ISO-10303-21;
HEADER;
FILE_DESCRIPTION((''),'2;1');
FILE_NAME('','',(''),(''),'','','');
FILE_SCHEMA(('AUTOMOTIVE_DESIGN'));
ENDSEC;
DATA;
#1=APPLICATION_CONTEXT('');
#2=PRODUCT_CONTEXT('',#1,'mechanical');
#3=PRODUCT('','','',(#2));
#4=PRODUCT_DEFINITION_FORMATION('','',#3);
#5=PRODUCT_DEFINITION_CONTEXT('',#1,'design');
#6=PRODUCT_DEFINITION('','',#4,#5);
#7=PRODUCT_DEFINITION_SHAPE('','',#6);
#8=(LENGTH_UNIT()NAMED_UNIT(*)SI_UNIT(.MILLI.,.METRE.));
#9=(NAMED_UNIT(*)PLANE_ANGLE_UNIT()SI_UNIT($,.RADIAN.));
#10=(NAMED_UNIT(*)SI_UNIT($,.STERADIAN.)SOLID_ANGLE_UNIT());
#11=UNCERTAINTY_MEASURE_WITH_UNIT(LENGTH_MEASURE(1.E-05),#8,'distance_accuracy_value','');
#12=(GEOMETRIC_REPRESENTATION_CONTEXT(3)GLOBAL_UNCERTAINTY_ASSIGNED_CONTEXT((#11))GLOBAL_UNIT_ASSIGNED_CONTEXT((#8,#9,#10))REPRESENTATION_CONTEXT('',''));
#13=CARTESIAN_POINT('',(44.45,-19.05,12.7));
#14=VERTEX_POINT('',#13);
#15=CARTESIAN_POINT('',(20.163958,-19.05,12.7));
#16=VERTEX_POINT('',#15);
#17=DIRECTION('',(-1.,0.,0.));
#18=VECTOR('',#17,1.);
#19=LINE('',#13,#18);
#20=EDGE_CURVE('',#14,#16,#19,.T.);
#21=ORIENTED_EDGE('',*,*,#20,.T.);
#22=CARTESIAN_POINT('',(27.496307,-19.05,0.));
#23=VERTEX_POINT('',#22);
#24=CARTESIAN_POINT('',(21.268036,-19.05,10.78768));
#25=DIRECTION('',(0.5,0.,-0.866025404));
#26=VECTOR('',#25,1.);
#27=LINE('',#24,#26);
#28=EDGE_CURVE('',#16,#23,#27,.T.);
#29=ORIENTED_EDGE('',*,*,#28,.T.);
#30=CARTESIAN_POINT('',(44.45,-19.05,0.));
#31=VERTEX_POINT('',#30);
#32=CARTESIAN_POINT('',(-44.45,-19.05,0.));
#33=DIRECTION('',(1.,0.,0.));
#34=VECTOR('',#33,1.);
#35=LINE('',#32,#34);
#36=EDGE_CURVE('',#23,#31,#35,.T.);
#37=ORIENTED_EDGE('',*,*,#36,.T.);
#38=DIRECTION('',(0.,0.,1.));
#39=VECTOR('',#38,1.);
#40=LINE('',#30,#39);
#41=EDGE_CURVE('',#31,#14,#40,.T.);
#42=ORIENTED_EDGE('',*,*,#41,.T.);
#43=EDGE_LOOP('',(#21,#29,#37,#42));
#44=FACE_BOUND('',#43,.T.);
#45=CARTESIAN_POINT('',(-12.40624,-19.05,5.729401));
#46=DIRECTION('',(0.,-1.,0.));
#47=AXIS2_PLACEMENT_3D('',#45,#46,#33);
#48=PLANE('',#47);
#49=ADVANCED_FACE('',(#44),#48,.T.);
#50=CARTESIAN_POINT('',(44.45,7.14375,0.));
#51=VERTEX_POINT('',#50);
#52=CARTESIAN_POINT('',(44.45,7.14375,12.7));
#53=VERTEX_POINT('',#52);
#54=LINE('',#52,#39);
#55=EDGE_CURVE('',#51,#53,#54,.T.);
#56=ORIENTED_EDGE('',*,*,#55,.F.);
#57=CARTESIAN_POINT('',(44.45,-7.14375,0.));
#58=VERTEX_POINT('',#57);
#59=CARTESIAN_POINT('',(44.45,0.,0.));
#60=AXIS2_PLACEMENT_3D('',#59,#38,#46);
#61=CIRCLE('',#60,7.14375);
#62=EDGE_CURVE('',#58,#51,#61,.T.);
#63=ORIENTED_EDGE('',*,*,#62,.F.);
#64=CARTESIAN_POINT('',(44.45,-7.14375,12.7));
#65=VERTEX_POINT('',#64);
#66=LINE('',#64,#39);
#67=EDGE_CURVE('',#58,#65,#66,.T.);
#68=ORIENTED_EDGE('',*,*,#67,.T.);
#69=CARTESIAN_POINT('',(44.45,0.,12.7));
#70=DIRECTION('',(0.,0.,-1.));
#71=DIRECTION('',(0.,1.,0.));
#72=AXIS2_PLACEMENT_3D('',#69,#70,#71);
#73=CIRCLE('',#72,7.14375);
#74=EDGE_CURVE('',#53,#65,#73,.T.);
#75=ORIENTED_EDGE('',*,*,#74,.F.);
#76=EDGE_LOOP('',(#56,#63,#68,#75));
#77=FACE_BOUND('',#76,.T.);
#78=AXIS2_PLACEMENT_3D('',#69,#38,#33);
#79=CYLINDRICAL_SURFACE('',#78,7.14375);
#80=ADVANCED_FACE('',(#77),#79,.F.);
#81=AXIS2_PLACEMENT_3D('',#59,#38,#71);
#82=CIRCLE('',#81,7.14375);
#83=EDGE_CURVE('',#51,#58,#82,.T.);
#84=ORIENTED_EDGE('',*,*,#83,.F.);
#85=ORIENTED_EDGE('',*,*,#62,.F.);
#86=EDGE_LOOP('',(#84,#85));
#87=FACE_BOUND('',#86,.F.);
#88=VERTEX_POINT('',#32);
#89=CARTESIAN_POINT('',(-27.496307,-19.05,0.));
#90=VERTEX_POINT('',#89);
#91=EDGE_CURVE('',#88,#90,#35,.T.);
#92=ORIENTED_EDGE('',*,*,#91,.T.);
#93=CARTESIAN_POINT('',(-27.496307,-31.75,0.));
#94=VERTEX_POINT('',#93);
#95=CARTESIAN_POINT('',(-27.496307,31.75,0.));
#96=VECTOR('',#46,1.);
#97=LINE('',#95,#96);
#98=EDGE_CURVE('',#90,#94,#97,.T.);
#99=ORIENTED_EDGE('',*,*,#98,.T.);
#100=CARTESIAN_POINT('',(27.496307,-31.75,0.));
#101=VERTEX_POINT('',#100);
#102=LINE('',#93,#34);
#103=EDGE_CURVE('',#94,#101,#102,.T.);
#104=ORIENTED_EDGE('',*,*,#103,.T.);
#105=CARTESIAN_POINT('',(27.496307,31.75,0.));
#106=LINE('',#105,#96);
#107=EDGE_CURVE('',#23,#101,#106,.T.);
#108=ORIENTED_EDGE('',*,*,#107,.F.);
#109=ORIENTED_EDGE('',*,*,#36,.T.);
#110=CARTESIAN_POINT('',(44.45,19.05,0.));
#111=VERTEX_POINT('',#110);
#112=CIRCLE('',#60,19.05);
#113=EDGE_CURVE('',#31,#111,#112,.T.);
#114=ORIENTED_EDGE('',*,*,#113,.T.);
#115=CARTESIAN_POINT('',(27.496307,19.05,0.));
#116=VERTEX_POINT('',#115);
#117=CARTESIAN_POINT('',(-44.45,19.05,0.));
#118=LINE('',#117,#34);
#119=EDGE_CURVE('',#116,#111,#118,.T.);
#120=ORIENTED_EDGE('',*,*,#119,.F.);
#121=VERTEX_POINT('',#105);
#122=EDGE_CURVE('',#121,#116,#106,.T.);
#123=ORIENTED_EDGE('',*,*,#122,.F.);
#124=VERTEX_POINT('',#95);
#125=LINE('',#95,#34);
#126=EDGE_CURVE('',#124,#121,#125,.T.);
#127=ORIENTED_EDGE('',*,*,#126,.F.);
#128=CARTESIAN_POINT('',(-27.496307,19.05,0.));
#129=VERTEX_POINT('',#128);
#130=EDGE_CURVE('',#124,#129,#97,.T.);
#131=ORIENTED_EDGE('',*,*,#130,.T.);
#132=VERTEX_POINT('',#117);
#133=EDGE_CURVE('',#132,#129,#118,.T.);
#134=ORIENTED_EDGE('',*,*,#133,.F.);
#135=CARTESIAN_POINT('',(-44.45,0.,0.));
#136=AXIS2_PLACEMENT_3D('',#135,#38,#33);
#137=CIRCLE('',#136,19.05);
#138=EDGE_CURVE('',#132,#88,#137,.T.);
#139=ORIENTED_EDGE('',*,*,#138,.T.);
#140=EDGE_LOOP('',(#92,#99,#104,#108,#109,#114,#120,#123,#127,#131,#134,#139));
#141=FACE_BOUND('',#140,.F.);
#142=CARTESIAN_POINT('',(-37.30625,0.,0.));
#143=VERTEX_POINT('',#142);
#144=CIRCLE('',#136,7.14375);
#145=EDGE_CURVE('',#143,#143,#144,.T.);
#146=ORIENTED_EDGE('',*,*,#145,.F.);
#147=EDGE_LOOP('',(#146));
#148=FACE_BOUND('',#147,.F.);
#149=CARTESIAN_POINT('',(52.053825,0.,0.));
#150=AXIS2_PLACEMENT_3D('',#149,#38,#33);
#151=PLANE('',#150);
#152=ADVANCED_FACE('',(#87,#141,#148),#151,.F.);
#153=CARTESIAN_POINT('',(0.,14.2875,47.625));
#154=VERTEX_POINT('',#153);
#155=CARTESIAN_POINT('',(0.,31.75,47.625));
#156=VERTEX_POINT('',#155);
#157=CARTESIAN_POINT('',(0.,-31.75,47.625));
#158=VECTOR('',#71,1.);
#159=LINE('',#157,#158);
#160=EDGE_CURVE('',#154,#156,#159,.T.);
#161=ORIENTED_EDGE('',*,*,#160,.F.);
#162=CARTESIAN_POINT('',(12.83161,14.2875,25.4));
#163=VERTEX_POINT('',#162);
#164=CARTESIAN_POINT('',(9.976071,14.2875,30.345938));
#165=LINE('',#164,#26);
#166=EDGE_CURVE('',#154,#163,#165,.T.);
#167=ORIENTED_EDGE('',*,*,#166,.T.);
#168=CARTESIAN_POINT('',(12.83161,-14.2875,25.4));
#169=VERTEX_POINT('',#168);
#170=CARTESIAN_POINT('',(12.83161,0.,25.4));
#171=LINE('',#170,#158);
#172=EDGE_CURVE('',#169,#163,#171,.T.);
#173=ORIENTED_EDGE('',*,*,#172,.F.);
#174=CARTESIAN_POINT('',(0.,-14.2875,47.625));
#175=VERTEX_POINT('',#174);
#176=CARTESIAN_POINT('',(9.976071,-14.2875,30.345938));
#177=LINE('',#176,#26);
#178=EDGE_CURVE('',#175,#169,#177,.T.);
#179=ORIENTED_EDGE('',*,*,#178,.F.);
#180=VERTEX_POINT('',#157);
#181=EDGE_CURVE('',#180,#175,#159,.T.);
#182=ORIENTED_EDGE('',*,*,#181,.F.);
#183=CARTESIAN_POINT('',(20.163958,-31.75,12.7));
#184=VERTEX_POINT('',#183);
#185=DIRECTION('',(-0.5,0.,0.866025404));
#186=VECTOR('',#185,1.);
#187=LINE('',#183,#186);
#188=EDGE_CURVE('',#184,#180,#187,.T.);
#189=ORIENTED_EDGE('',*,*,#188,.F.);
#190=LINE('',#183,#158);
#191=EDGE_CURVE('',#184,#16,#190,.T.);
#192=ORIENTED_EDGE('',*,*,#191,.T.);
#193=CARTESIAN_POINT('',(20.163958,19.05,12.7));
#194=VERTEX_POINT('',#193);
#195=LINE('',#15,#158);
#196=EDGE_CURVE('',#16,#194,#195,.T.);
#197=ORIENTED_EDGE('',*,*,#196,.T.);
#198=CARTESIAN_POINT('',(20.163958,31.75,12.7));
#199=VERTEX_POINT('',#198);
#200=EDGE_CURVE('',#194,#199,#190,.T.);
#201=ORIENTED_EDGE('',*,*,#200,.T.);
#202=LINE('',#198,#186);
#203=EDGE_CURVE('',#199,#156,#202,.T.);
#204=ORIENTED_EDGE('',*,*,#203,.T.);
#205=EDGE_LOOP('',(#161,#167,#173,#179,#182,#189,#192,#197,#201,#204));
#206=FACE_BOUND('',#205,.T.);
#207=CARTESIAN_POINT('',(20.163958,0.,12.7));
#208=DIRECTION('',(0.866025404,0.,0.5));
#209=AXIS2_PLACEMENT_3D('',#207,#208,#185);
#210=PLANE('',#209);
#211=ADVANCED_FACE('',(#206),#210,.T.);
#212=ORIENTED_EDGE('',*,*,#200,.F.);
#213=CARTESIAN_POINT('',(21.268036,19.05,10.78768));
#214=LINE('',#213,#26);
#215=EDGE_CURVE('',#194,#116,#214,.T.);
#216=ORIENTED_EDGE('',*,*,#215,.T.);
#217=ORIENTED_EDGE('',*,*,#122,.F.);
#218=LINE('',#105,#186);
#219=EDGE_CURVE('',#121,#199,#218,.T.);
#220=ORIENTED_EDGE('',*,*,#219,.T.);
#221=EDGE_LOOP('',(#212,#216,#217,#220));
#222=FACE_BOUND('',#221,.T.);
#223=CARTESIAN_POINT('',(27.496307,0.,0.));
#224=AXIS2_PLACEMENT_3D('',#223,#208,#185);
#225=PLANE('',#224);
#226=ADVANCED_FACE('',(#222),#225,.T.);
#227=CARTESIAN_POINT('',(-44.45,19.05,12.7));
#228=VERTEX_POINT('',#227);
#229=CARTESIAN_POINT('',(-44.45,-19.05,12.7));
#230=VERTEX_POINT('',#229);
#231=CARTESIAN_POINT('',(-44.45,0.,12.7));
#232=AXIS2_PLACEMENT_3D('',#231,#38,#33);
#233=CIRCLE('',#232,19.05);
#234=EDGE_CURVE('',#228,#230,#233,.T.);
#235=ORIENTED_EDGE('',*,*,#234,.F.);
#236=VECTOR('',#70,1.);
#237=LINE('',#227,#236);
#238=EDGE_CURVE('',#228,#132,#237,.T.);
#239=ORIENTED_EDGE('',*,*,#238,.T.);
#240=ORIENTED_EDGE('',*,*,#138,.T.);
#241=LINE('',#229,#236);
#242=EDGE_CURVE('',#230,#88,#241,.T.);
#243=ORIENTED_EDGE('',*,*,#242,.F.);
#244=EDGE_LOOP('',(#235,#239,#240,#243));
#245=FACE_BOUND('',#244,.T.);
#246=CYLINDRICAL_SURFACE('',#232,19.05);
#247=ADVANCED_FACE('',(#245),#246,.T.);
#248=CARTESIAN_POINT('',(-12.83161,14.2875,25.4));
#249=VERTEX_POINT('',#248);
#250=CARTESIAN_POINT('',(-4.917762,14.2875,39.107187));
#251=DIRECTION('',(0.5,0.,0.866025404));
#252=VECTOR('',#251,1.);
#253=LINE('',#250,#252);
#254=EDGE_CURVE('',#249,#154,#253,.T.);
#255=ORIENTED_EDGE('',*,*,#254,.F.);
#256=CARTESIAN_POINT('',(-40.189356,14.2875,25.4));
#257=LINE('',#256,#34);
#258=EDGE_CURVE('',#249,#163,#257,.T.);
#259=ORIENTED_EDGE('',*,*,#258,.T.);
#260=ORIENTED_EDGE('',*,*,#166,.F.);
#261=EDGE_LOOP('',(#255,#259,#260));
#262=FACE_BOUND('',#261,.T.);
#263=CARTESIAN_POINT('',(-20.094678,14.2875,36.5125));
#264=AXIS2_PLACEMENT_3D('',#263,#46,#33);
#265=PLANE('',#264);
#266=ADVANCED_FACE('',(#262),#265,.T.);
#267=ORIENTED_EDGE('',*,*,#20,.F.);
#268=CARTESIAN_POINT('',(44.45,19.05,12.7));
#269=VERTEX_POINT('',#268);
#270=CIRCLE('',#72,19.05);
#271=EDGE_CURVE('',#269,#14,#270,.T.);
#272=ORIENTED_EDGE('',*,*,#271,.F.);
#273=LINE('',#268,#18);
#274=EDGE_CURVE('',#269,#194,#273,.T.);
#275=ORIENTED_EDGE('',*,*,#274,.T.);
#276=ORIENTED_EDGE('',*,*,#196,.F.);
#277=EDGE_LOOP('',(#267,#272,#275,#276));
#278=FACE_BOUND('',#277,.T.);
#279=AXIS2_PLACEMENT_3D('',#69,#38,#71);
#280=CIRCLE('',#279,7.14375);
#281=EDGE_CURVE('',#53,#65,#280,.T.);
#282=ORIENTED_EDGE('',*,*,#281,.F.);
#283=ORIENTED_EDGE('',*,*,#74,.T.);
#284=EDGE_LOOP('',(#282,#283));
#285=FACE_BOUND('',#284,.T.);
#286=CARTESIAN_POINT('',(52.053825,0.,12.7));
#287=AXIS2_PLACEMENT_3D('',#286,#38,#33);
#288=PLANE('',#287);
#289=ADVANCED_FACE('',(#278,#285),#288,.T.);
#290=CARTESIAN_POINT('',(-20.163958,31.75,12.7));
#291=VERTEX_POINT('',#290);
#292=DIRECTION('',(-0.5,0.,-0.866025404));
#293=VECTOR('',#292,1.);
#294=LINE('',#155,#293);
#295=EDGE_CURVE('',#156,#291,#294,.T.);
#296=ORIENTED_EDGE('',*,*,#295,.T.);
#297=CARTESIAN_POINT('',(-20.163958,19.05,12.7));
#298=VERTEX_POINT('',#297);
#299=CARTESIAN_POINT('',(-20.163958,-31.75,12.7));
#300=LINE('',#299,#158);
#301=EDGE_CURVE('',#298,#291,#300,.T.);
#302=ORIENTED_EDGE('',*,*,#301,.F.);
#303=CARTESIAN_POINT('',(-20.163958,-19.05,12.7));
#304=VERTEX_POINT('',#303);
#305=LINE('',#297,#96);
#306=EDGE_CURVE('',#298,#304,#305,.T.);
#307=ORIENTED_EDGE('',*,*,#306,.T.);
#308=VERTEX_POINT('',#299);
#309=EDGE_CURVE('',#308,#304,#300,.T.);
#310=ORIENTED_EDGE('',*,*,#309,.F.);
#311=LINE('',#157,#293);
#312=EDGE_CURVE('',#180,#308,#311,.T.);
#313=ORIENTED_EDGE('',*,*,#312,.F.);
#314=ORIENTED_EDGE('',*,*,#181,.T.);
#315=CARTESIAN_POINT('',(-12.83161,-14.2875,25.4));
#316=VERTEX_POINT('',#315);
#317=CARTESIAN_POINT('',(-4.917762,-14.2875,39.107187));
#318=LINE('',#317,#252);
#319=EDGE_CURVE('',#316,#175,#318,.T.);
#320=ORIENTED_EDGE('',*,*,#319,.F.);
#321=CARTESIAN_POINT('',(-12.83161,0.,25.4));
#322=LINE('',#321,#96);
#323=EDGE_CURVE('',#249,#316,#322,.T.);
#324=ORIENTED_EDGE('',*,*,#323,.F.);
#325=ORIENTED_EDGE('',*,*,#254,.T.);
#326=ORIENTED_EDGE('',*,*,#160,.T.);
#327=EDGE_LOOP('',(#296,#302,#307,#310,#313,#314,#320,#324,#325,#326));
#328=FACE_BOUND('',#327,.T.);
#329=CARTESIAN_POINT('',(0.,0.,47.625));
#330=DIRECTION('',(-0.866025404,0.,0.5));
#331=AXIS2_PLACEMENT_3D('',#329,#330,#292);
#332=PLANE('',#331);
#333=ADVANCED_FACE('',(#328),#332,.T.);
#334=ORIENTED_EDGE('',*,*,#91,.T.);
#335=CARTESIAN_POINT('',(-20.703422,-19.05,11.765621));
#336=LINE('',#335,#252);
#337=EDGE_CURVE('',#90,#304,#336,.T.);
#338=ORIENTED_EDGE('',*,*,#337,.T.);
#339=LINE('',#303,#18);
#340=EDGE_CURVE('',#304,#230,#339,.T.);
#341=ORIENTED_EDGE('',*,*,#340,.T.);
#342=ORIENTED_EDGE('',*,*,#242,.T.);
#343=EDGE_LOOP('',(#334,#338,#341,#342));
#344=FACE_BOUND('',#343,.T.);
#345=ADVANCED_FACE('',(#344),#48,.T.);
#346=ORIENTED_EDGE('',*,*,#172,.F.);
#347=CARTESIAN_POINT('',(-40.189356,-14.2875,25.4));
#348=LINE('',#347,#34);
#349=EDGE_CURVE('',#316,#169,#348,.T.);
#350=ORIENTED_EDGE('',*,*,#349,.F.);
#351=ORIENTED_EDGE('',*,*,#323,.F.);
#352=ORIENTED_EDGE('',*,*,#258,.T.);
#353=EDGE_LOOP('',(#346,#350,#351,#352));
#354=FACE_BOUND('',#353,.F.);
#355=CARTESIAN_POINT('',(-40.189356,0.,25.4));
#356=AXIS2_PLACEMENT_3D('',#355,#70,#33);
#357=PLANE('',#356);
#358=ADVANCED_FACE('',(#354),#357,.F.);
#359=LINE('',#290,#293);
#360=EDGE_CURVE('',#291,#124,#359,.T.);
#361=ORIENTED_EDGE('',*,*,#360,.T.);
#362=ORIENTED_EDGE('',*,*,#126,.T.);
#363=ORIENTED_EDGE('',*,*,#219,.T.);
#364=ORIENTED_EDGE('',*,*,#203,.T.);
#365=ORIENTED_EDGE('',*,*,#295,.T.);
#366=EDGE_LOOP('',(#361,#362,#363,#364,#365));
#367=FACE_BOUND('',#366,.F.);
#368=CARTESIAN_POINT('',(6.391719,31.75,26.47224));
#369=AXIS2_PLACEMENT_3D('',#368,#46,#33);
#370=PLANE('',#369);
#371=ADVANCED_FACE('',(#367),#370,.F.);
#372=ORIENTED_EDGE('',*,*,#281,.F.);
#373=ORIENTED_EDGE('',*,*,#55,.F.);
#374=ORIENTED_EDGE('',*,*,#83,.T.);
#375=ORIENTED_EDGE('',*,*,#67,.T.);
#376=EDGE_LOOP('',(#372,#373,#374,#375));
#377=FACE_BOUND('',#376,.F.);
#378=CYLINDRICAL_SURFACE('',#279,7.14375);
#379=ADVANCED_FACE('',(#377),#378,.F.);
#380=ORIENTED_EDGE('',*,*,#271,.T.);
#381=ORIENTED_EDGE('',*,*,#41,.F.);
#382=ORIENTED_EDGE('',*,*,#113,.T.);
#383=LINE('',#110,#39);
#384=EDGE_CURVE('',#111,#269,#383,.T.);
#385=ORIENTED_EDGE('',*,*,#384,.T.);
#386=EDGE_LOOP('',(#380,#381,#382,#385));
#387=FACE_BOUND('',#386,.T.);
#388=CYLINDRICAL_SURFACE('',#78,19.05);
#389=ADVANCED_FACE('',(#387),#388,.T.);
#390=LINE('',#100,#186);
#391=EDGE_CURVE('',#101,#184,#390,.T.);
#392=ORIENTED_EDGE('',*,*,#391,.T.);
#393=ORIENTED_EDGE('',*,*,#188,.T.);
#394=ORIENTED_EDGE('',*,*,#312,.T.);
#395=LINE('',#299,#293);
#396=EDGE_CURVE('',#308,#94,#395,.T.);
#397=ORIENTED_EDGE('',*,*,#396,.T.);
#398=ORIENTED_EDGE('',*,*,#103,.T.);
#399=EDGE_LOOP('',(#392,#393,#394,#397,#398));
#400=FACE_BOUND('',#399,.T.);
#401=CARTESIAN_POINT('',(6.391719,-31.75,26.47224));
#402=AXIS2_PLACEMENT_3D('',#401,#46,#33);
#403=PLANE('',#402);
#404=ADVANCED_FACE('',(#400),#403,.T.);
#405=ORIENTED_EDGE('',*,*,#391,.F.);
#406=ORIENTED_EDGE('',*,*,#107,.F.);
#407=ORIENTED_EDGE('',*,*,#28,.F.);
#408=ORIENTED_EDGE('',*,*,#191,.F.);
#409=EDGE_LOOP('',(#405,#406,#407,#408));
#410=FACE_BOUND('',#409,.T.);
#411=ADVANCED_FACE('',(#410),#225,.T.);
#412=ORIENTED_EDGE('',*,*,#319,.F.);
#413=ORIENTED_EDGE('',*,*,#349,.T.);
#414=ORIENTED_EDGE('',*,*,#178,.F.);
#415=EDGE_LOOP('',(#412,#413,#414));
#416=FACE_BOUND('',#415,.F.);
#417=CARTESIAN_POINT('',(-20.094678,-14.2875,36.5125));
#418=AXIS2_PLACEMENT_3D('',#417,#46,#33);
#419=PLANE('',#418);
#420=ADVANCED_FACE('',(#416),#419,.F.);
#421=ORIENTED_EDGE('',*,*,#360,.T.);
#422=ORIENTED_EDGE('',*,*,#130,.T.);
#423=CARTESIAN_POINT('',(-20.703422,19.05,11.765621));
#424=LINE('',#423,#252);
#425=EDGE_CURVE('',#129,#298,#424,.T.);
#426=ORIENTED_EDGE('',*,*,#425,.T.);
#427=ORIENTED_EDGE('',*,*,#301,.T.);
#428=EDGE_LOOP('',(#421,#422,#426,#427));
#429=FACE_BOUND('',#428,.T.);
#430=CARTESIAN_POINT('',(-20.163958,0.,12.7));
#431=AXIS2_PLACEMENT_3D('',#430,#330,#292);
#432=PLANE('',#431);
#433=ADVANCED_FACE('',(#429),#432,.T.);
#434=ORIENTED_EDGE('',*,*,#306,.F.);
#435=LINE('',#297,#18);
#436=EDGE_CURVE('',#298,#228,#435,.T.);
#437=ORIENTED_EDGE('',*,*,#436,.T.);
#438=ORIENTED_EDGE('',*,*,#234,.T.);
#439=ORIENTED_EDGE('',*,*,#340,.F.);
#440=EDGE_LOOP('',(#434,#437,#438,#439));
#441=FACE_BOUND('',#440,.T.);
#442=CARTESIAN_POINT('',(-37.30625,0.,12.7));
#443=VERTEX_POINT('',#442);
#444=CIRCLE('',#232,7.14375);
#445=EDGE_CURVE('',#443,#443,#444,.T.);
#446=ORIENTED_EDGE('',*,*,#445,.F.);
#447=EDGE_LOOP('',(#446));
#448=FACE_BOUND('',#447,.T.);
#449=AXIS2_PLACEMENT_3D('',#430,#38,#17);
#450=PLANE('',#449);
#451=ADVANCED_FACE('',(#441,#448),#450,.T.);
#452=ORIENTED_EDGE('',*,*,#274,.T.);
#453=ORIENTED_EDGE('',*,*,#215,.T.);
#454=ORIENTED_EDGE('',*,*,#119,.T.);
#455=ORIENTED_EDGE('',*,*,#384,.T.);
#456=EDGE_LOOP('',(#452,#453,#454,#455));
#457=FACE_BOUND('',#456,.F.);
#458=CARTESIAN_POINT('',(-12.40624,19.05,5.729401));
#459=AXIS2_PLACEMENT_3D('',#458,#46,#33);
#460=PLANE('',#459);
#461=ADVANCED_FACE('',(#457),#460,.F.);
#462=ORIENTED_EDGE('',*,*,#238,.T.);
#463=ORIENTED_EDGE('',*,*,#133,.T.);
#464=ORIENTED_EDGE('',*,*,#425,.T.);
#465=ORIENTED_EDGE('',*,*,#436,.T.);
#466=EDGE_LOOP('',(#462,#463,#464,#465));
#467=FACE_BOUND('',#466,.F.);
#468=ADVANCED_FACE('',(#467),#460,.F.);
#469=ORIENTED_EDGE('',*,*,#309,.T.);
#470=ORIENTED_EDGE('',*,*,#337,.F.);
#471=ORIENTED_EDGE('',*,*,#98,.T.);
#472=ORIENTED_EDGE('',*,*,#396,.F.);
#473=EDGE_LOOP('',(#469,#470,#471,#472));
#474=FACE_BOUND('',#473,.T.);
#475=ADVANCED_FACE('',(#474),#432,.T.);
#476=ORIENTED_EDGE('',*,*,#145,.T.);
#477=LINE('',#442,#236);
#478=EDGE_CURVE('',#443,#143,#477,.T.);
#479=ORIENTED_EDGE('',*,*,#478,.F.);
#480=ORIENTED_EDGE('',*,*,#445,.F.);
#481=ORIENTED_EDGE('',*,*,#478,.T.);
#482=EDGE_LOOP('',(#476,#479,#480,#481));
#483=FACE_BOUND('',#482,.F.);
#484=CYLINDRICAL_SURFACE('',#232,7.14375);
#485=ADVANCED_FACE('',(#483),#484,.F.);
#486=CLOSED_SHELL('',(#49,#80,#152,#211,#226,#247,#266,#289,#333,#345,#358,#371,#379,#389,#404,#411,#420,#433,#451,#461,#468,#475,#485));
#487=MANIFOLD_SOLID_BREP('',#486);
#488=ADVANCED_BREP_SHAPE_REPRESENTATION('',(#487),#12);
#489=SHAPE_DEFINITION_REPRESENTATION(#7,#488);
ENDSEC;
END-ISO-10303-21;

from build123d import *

# Parameters (mm, degrees)
F1_DEPTH = 31.75
F2_DEPTH = 19.05
F5_DEPTH = 12.7
F6_DEPTH = 25.4
F7_DEPTH = 25.4
F8_W     = 40.1893556118
F8_H     = 22.225
F8_W_2   = 32.2620980442
F9_DEPTH = 14.2875


with BuildPart() as f1:
    # F0 (on Front) → F1 (new body, symmetric)
    with BuildSketch(Plane.XZ):
        Polygon((0, 47.625), (0, 12.7), (20.1639581514, 12.7), align=None)
        Polygon((-27.4963065702, 0), (0, 0), (0, 12.7), (-20.1639581514, 12.7), align=None)
        Polygon((0, 12.7), (0, 0), (27.4963065702, 0), (20.1639581514, 12.7), align=None)
        Polygon((-20.1639581514, 12.7), (0, 12.7), (0, 47.625), align=None)
    extrude(amount=F1_DEPTH, both=True)

    # F0 (on Front) → F2 (join, symmetric)
    with BuildSketch(Plane.XZ):
        Polygon((-27.4963065702, 0), (0, 0), (0, 12.7), (-20.1639581514, 12.7), align=None)
        Polygon((0, 12.7), (0, 0), (27.4963065702, 0), (20.1639581514, 12.7), align=None)
        Polygon((-20.1639581514, 12.7), (0, 12.7), (0, 47.625), align=None)
        Polygon((0, 47.625), (0, 12.7), (20.1639581514, 12.7), align=None)
        Polygon((-44.45, 0), (-27.4963065702, 0), (-20.1639581514, 12.7), (-44.45, 12.7), align=None)
        Polygon((20.1639581514, 12.7), (27.4963065702, 0), (44.45, 0), (44.45, 12.7), align=None)
    extrude(amount=F2_DEPTH, both=True)

    # F4 (on face) + F3 (on face) → F5 (join, through all)
    with BuildSketch(Plane.XY.offset(12.7)):
        with BuildLine():
            ThreePointArc((44.45, -19.05), (57.9203841816, -13.4703841816), (63.5, 0))
            ThreePointArc((63.5, 0), (57.9203841816, 13.4703841816), (44.45, 19.05))
            Line((44.45, 19.05), (44.45, 7.14375))
            ThreePointArc((44.45, 7.14375), (49.5013940681, 5.0513940681), (51.59375, 0))
            ThreePointArc((51.59375, 0), (49.5013940681, -5.0513940681), (44.45, -7.14375))
            Line((44.45, -7.14375), (44.45, -19.05))
        make_face()
        with BuildLine():
            Line((44.45, 7.14375), (44.45, 19.05))
            ThreePointArc((44.45, 19.05), (25.4, 0), (44.45, -19.05))
            Line((44.45, -19.05), (44.45, -7.14375))
            ThreePointArc((44.45, -7.14375), (37.30625, 0), (44.45, 7.14375))
        make_face()
    with BuildSketch(Plane.XY.offset(12.7)):
        with BuildLine():
            ThreePointArc((-44.45, -19.05), (-30.9796158184, -13.4703841816), (-25.4, 0))
            ThreePointArc((-25.4, 0), (-30.9796158184, 13.4703841816), (-44.45, 19.05))
            Line((-44.45, 19.05), (-44.45, 7.14375))
            ThreePointArc((-44.45, 7.14375), (-39.3986059319, 5.0513940681), (-37.30625, 0))
            ThreePointArc((-37.30625, 0), (-39.3986059319, -5.0513940681), (-44.45, -7.14375))
            Line((-44.45, -7.14375), (-44.45, -19.05))
        make_face()
        with BuildLine():
            Line((-44.45, 7.14375), (-44.45, 19.05))
            ThreePointArc((-44.45, 19.05), (-63.5, 0), (-44.45, -19.05))
            Line((-44.45, -19.05), (-44.45, -7.14375))
            ThreePointArc((-44.45, -7.14375), (-51.59375, 0), (-44.45, 7.14375))
        make_face()
    extrude(amount=-F5_DEPTH)

    # F3 (on face) → F6 (cut)
    with BuildSketch(Plane.XY.offset(12.7)):
        with BuildLine():
            ThreePointArc((-37.30625, 0), (-39.3986059319, 5.0513940681), (-44.45, 7.14375))
            Line((-44.45, 7.14375), (-44.45, -7.14375))
            ThreePointArc((-44.45, -7.14375), (-39.3986059319, -5.0513940681), (-37.30625, 0))
        make_face()
        with BuildLine():
            Line((-44.45, -7.14375), (-44.45, 7.14375))
            ThreePointArc((-44.45, 7.14375), (-51.59375, 0), (-44.45, -7.14375))
        make_face()
    extrude(amount=-F6_DEPTH, mode=Mode.SUBTRACT)

    # F4 (on face) → F7 (cut)
    with BuildSketch(Plane.XY.offset(12.7)):
        with BuildLine():
            Line((44.45, -7.14375), (44.45, 7.14375))
            ThreePointArc((44.45, 7.14375), (37.30625, 0), (44.45, -7.14375))
        make_face()
    extrude(amount=-F7_DEPTH, mode=Mode.SUBTRACT)

    # F8 (on Front) → F9 (cut, symmetric)
    with BuildSketch(Plane.XZ):
        with Locations((-20.0946778059, 36.5125)):
            Rectangle(F8_W, F8_H)
        with Locations((16.1310490221, 36.5125)):
            Rectangle(F8_W_2, F8_H)
    extrude(amount=F9_DEPTH, both=True, mode=Mode.SUBTRACT)


solid = f1.part
